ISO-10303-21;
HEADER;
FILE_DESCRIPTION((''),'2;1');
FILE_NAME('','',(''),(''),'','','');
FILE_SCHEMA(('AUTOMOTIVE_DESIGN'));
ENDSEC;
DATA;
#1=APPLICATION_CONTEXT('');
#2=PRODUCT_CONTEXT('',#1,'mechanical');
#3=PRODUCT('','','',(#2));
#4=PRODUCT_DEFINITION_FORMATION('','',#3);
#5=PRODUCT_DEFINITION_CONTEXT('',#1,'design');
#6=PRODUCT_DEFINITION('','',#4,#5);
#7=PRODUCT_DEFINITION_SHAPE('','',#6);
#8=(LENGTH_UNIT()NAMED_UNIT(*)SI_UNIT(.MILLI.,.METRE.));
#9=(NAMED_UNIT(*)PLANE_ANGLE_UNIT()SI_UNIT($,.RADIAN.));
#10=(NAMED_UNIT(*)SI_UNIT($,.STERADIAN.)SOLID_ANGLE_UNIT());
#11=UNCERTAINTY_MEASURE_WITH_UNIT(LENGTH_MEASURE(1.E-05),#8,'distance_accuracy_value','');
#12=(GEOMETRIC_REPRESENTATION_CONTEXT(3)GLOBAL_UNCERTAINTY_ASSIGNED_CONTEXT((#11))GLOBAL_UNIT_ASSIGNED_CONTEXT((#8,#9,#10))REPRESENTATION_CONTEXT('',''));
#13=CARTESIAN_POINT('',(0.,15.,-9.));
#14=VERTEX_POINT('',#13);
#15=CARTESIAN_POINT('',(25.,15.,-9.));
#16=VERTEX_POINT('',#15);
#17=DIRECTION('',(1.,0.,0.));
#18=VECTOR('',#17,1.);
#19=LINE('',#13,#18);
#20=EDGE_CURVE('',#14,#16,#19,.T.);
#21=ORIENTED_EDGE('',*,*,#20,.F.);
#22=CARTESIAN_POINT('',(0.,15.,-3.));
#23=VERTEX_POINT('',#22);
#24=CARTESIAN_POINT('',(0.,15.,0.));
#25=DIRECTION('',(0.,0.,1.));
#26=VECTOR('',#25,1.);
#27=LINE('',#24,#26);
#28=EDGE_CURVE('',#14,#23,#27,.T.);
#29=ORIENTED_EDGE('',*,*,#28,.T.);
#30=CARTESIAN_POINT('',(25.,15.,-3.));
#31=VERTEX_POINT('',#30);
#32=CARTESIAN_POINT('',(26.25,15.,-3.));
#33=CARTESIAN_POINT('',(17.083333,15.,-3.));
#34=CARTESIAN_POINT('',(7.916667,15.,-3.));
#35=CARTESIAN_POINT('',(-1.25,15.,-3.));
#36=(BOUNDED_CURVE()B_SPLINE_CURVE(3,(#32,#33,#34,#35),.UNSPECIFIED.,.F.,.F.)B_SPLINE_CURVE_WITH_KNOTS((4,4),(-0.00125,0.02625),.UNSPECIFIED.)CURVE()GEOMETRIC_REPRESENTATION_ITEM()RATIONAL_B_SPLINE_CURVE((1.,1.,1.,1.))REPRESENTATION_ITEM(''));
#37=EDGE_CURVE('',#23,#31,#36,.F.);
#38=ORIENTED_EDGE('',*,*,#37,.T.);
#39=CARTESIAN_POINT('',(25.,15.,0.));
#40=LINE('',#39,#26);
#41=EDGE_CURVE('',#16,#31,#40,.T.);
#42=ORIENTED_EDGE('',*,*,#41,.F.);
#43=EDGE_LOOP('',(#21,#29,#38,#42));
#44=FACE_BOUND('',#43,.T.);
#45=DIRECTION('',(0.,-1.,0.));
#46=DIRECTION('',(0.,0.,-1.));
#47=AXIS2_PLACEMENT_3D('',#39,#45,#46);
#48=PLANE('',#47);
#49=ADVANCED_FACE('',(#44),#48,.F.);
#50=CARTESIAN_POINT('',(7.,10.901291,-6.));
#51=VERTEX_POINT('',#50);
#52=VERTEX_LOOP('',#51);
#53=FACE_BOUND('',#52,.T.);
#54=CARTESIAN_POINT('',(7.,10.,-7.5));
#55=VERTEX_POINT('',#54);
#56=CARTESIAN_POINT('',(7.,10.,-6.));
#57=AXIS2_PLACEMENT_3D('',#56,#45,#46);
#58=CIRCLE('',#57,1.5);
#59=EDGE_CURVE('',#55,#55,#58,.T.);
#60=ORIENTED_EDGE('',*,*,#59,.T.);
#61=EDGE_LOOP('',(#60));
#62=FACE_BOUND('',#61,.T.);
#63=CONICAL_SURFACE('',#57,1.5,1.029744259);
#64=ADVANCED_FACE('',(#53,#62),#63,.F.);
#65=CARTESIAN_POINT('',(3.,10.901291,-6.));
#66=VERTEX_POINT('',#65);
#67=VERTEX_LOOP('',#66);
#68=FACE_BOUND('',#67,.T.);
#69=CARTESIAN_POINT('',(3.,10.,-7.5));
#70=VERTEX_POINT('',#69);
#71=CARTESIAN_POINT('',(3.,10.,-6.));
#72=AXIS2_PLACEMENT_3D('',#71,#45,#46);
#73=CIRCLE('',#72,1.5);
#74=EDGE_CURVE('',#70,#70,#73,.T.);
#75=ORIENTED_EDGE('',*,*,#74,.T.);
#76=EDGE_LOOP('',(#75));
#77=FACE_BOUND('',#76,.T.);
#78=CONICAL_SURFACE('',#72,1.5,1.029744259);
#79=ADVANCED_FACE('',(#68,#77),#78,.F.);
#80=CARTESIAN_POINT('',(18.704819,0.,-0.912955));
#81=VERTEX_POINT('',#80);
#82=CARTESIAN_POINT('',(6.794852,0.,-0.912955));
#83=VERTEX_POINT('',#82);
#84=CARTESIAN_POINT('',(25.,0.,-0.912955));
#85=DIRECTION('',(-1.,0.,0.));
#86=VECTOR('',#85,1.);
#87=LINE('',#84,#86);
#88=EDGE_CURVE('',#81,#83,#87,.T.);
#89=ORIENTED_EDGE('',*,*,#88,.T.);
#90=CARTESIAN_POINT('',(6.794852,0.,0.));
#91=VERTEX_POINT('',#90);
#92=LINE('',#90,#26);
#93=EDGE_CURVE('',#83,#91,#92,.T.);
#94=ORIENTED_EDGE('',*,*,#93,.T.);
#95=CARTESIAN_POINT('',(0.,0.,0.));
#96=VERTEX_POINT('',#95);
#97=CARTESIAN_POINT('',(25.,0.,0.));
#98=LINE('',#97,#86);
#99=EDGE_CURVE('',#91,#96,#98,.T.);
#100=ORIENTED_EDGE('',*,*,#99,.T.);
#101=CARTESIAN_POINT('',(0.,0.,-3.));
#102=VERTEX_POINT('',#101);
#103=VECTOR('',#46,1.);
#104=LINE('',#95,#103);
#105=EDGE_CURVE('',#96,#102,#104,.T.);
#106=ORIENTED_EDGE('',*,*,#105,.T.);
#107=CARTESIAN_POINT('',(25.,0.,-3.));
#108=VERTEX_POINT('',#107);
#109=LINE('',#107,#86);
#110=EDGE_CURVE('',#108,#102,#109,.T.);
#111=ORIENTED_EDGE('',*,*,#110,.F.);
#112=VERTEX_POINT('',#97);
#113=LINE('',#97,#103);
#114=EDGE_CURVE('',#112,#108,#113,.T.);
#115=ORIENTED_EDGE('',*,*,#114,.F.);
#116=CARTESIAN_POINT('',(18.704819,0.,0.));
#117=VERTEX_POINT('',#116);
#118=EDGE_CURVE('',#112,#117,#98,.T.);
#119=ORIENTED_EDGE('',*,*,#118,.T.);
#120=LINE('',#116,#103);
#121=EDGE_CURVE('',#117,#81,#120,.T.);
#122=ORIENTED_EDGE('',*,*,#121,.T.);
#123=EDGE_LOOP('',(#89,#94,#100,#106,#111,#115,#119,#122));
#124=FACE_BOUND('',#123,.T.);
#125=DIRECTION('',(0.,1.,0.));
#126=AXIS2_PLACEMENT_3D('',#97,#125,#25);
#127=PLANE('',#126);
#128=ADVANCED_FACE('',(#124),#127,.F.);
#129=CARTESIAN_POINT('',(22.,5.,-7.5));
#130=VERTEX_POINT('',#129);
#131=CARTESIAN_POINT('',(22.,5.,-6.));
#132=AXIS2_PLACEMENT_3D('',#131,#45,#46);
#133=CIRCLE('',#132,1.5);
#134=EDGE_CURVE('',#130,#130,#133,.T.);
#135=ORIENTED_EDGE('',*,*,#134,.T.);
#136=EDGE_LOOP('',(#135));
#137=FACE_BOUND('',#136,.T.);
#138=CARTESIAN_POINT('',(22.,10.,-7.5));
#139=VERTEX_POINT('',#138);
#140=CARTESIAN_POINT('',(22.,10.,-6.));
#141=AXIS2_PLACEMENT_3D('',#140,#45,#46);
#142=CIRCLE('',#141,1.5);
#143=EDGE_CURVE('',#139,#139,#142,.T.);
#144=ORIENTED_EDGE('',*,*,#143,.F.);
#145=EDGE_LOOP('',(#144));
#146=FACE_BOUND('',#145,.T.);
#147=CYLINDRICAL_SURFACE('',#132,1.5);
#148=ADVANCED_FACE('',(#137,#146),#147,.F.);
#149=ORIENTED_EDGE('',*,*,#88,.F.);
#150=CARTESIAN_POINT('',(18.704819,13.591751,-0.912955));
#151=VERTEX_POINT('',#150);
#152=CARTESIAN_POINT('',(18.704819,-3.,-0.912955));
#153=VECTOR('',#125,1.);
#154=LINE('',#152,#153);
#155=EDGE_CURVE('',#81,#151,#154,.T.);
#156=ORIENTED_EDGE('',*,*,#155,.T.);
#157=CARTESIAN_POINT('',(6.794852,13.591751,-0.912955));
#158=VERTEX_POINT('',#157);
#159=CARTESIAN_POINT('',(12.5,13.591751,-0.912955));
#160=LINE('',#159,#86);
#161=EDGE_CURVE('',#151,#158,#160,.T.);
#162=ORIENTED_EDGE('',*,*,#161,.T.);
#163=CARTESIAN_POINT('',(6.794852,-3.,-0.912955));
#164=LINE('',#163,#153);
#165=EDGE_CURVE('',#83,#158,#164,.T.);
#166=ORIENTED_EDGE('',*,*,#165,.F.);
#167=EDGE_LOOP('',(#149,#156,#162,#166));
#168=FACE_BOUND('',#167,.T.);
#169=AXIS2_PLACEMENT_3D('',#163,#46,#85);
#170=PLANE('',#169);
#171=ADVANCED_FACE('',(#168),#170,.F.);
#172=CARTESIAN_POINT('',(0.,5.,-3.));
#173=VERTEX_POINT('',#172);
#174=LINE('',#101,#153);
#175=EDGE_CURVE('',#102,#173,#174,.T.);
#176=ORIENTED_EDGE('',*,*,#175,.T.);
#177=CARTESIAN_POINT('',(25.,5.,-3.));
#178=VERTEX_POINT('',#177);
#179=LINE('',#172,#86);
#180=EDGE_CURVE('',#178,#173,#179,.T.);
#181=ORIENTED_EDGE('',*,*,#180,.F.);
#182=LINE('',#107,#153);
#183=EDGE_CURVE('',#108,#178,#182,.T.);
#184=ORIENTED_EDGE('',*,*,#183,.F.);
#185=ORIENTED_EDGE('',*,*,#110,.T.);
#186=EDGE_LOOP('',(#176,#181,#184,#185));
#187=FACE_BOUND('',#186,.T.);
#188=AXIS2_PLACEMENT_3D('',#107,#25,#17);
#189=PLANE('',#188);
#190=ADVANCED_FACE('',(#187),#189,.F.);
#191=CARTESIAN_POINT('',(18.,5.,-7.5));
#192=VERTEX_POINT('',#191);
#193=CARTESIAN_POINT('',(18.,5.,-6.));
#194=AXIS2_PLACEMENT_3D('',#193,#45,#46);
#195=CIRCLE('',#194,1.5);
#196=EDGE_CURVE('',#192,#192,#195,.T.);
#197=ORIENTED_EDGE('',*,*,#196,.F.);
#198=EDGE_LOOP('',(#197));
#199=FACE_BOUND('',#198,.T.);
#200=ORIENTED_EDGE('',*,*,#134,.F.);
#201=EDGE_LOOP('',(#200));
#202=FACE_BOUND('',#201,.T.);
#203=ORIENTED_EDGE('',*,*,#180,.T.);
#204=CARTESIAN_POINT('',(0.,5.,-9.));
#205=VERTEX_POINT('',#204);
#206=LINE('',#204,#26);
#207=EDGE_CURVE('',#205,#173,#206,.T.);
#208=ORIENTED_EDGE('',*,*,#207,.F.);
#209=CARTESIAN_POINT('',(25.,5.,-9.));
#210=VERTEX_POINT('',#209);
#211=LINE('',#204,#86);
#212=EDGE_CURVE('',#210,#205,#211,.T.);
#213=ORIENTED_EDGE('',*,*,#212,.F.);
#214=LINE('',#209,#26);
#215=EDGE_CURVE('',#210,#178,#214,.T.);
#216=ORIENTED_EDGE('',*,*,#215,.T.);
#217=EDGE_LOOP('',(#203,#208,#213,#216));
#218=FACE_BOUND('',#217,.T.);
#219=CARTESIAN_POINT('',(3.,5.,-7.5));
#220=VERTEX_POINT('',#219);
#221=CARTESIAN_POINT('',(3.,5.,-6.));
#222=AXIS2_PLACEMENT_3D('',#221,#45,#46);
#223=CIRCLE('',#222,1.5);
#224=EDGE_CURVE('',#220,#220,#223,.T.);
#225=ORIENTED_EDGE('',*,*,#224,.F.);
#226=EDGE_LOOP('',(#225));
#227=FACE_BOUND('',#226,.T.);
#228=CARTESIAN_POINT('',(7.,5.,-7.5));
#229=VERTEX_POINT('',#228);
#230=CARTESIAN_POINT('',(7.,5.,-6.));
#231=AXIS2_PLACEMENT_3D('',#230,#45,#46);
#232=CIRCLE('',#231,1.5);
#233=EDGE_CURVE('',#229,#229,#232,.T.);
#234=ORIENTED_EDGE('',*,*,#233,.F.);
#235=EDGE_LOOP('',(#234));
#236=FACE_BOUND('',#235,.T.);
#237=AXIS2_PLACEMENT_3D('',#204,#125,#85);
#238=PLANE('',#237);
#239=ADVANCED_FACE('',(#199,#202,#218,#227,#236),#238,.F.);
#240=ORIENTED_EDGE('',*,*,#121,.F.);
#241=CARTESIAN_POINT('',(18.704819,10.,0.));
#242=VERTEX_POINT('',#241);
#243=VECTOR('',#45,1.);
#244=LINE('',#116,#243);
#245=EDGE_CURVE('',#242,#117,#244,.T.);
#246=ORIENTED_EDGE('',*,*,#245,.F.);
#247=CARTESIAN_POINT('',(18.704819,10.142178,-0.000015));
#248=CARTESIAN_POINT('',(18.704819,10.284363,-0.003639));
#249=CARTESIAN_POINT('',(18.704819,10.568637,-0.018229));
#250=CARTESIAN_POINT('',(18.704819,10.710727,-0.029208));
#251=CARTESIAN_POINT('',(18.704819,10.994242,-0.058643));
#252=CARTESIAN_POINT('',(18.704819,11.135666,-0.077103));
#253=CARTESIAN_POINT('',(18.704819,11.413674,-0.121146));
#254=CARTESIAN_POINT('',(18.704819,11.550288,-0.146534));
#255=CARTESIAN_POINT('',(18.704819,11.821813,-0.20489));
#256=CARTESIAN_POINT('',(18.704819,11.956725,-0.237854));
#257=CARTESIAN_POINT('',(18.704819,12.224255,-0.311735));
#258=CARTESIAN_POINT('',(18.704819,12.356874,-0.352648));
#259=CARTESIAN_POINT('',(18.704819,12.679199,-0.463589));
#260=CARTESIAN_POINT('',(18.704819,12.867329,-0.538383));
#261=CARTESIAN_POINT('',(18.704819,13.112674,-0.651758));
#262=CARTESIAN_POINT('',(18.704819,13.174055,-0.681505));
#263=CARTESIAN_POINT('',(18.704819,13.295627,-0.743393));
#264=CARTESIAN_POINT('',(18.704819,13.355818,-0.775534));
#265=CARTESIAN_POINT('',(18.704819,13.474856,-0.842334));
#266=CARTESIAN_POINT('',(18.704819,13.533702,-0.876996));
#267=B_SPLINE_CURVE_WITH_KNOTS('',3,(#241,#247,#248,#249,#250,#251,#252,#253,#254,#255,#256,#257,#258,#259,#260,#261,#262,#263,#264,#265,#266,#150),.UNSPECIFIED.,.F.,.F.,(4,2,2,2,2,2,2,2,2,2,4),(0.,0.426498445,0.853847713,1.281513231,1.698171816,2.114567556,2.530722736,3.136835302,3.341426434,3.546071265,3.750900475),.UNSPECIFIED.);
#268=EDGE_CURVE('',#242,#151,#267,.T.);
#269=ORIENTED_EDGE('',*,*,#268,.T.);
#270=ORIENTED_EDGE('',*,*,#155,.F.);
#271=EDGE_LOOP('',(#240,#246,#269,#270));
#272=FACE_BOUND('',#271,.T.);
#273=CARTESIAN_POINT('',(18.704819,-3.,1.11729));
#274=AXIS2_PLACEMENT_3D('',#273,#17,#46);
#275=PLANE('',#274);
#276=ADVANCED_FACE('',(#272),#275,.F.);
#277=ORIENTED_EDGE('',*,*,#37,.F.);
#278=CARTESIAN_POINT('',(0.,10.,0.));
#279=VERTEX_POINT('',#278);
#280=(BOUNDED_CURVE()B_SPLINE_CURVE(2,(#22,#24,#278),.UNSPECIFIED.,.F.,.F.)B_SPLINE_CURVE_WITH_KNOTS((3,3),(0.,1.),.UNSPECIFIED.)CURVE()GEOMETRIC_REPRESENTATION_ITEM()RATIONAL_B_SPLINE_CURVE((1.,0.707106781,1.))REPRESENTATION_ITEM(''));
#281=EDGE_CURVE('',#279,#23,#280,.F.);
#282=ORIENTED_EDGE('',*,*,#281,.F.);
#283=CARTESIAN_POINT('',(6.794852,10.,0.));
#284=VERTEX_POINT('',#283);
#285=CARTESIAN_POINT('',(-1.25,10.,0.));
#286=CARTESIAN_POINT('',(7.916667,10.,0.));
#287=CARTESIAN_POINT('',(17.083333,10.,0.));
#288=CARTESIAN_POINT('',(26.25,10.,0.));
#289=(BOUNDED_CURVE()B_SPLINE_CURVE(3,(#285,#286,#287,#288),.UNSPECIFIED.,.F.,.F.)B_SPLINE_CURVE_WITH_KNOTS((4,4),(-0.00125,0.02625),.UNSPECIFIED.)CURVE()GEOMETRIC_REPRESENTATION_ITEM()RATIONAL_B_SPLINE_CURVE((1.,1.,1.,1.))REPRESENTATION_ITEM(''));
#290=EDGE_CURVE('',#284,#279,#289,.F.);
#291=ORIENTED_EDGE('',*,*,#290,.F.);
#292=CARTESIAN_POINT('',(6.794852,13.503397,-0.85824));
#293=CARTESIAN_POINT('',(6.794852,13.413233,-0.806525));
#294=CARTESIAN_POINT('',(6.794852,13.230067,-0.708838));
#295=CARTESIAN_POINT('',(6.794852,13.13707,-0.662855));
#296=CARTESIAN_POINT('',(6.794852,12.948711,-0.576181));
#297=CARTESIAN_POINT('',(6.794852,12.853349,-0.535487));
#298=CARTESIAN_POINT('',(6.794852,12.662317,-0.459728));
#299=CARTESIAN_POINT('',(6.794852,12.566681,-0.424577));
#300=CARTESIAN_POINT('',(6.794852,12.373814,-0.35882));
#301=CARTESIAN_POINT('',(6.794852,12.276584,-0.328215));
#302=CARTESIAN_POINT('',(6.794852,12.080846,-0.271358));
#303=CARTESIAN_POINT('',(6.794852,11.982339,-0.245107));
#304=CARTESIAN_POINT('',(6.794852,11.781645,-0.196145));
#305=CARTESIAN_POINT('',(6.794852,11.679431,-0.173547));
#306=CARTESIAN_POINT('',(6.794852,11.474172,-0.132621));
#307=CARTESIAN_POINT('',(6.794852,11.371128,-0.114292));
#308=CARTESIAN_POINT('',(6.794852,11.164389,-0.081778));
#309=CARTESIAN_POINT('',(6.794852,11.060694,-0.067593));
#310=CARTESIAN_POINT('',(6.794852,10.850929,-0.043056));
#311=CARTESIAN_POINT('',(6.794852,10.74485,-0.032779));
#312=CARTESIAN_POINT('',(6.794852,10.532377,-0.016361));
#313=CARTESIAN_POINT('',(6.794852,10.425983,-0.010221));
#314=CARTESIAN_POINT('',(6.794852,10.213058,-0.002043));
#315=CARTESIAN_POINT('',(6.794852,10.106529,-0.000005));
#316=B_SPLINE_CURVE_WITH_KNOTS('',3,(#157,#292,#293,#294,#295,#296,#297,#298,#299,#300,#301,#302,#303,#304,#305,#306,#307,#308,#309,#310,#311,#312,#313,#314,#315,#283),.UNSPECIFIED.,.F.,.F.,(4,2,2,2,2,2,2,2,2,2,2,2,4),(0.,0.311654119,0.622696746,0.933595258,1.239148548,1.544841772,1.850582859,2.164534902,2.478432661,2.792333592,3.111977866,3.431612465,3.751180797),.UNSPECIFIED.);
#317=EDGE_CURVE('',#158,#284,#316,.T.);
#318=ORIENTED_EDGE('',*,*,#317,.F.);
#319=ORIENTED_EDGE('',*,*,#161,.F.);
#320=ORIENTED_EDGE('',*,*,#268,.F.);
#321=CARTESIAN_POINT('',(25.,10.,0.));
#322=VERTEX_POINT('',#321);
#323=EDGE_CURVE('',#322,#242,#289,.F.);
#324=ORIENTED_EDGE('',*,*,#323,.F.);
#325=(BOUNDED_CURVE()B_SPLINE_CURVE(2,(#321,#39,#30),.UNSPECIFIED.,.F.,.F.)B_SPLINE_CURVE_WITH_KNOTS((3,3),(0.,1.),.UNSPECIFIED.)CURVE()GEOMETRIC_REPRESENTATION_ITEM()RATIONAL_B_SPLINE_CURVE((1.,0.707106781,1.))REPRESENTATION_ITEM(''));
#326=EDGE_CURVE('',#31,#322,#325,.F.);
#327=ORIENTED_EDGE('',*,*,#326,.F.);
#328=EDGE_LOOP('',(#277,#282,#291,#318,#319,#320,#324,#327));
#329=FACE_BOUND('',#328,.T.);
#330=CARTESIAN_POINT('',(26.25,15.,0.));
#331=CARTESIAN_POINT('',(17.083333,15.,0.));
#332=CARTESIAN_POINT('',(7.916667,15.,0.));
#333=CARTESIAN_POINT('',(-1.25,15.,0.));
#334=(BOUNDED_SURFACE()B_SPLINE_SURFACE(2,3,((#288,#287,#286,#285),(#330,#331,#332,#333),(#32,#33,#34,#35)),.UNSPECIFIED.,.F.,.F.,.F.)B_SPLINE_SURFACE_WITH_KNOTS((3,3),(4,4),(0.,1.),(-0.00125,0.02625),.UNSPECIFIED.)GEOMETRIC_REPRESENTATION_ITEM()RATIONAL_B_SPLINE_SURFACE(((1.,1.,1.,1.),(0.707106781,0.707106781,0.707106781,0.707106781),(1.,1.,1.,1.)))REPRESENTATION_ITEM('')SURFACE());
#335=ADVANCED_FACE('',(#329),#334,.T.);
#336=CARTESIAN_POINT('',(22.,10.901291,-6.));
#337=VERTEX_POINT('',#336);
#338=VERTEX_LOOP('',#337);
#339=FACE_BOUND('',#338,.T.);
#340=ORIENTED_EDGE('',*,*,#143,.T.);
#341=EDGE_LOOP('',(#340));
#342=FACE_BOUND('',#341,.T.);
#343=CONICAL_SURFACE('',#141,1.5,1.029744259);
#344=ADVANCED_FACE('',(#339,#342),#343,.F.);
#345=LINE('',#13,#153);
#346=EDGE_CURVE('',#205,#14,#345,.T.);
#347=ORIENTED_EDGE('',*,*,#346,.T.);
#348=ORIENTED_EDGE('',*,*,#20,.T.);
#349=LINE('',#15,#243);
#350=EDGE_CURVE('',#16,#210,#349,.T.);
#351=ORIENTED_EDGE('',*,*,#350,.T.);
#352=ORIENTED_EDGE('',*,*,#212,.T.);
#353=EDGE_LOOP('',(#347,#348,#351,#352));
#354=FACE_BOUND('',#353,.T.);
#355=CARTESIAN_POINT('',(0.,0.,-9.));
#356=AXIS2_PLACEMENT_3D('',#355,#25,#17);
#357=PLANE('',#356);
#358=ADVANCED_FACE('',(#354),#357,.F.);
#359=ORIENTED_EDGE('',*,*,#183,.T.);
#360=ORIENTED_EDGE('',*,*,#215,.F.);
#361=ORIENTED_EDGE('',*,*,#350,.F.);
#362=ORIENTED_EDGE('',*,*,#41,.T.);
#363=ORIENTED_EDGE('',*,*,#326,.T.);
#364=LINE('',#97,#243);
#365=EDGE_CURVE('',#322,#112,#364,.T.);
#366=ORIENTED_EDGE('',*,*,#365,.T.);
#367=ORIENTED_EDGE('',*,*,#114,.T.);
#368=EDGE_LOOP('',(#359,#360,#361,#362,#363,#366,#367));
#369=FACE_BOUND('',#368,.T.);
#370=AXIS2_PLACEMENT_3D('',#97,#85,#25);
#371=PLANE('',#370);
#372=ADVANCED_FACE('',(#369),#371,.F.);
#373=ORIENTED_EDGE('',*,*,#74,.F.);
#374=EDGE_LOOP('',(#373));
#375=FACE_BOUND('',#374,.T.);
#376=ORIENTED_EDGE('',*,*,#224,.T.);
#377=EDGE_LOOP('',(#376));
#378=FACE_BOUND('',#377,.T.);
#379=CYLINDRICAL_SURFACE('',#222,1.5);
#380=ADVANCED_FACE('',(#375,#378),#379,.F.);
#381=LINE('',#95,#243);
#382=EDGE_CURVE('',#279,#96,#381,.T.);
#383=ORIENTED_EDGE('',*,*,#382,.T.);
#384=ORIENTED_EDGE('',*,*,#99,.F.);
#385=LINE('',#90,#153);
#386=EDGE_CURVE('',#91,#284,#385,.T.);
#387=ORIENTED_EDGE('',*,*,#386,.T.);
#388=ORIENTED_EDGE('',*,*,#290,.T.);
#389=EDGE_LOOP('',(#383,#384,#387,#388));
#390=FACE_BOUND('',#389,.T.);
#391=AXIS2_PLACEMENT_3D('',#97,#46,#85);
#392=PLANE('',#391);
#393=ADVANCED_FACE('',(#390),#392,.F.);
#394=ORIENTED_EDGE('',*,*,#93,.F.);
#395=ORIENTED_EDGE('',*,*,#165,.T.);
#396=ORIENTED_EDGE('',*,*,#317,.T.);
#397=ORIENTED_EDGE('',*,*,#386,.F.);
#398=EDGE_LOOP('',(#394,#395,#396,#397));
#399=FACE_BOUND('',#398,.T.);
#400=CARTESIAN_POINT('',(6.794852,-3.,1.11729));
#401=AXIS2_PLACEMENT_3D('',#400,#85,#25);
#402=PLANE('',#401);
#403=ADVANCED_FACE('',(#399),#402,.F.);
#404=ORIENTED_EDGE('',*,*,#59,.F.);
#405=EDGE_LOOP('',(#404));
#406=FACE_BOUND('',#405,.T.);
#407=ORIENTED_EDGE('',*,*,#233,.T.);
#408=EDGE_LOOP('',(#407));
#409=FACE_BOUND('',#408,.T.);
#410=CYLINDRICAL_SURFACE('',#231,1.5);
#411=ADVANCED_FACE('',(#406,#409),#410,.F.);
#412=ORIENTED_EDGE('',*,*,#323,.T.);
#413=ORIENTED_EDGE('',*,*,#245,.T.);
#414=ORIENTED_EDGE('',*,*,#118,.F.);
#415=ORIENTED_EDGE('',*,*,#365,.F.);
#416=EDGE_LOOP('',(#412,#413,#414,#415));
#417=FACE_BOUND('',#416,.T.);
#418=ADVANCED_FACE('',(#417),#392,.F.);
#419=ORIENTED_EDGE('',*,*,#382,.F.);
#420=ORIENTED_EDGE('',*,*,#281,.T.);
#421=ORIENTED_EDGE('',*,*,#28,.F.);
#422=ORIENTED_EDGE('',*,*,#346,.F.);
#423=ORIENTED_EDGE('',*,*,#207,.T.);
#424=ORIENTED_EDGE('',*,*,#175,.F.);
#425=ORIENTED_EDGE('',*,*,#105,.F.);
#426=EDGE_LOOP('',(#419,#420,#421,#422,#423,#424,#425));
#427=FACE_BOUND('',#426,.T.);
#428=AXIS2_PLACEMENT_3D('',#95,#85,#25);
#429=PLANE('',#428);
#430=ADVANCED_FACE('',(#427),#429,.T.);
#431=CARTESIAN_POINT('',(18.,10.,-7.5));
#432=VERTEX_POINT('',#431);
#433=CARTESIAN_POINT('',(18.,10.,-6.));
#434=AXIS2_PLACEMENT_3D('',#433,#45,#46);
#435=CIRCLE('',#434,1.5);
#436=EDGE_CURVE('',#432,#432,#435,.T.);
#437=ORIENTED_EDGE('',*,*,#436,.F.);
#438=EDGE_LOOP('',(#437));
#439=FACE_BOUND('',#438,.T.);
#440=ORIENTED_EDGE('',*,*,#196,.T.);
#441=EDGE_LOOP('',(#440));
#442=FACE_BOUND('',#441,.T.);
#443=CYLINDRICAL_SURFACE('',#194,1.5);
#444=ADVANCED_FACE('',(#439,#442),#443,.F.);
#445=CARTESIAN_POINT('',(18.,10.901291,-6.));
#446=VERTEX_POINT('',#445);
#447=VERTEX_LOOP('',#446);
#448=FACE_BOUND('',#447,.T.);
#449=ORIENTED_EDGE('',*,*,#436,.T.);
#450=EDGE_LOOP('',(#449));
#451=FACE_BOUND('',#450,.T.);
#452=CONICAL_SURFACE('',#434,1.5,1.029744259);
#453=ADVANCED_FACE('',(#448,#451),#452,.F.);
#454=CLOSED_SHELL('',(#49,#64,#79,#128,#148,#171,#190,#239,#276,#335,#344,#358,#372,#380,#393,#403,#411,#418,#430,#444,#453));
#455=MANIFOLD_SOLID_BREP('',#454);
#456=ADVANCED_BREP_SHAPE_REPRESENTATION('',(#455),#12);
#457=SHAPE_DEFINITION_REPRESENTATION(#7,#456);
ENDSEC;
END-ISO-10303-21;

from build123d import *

# Parameters (mm, degrees)
SKETCH1_W                 = 3
SKETCH1_H                 = 15
BOSS_EXTRUDE1_DEPTH       = 25
SKETCH2_W                 = 25
SKETCH2_H                 = 10
BOSS_EXTRUDE2_DEPTH       = 6
FILLET1_SIZE              = 3
FILLET1_SIZE_2            = 5
F_3_0MM_DOWEL_HOLE1_D     = 3
F_3_0MM_DOWEL_HOLE1_DEPTH = 5
F_3_0MM_DOWEL_HOLE1_TIP   = 0.901290929
SKETCH5_W                 = 11.909967374
SKETCH5_H                 = 2.030245184
CUT_EXTRUDE1_DEPTH        = 18


with BuildPart() as part:
    # Sketch1 → Boss-Extrude1 (new body)
    with BuildSketch(Plane(origin=(0, 0, 0), x_dir=(0, 0, -1), z_dir=(1, 0, 0))):
        with Locations((1.5, 7.5)):
            Rectangle(SKETCH1_W, SKETCH1_H)
    extrude(amount=BOSS_EXTRUDE1_DEPTH)

    # Sketch2 → Boss-Extrude2 (add)
    with BuildSketch(Plane(origin=(0, 0, -3), x_dir=(-1, 0, 0), z_dir=(0, 0, -1))):
        with Locations((-12.5, 10)):
            Rectangle(SKETCH2_W, SKETCH2_H)
    extrude(amount=BOSS_EXTRUDE2_DEPTH)

    # Fillet1
    # an asymmetric fillet: 5, 3 mm, written as the material it takes off along each edge
    with BuildSketch(Plane(origin=(-12.5, 15, 0), x_dir=(0, 0, -1), z_dir=(1, 0, 0))) as fillet1_piece_1:
        with BuildLine():
            Bezier((FILLET1_SIZE, 0), (0, 0), (0, -FILLET1_SIZE_2), weights=[1, 0.707106781, 1])
            Line((0, -FILLET1_SIZE_2), (0, 0))
            Line((0, 0), (FILLET1_SIZE, 0))
        make_face()
    extrude(amount=50, mode=Mode.SUBTRACT)

    # Ø3.0mm Dowel Hole1
    with Locations(Plane(origin=(0, 5, 0), x_dir=(-1, 0, 0), z_dir=(0, -1, 0))):
        with Locations((-3, 6), (-18, 6), (-7, 6), (-22, 6)):
            Hole(F_3_0MM_DOWEL_HOLE1_D / 2, depth=F_3_0MM_DOWEL_HOLE1_DEPTH)
            with Locations((0, 0, -(F_3_0MM_DOWEL_HOLE1_DEPTH + F_3_0MM_DOWEL_HOLE1_TIP / 2))):  # 118° drill point
                Cone(0, F_3_0MM_DOWEL_HOLE1_D / 2, F_3_0MM_DOWEL_HOLE1_TIP, mode=Mode.SUBTRACT)

    # Sketch5 → Cut-Extrude1 (cut)
    with BuildSketch(Plane(origin=(0, 15, 0), x_dir=(1, 0, 0), z_dir=(0, 1, 0))):
        with Locations((12.749835557, -0.102167309)):
            Rectangle(SKETCH5_W, SKETCH5_H)
    extrude(amount=-CUT_EXTRUDE1_DEPTH, mode=Mode.SUBTRACT)


solid = part.part
